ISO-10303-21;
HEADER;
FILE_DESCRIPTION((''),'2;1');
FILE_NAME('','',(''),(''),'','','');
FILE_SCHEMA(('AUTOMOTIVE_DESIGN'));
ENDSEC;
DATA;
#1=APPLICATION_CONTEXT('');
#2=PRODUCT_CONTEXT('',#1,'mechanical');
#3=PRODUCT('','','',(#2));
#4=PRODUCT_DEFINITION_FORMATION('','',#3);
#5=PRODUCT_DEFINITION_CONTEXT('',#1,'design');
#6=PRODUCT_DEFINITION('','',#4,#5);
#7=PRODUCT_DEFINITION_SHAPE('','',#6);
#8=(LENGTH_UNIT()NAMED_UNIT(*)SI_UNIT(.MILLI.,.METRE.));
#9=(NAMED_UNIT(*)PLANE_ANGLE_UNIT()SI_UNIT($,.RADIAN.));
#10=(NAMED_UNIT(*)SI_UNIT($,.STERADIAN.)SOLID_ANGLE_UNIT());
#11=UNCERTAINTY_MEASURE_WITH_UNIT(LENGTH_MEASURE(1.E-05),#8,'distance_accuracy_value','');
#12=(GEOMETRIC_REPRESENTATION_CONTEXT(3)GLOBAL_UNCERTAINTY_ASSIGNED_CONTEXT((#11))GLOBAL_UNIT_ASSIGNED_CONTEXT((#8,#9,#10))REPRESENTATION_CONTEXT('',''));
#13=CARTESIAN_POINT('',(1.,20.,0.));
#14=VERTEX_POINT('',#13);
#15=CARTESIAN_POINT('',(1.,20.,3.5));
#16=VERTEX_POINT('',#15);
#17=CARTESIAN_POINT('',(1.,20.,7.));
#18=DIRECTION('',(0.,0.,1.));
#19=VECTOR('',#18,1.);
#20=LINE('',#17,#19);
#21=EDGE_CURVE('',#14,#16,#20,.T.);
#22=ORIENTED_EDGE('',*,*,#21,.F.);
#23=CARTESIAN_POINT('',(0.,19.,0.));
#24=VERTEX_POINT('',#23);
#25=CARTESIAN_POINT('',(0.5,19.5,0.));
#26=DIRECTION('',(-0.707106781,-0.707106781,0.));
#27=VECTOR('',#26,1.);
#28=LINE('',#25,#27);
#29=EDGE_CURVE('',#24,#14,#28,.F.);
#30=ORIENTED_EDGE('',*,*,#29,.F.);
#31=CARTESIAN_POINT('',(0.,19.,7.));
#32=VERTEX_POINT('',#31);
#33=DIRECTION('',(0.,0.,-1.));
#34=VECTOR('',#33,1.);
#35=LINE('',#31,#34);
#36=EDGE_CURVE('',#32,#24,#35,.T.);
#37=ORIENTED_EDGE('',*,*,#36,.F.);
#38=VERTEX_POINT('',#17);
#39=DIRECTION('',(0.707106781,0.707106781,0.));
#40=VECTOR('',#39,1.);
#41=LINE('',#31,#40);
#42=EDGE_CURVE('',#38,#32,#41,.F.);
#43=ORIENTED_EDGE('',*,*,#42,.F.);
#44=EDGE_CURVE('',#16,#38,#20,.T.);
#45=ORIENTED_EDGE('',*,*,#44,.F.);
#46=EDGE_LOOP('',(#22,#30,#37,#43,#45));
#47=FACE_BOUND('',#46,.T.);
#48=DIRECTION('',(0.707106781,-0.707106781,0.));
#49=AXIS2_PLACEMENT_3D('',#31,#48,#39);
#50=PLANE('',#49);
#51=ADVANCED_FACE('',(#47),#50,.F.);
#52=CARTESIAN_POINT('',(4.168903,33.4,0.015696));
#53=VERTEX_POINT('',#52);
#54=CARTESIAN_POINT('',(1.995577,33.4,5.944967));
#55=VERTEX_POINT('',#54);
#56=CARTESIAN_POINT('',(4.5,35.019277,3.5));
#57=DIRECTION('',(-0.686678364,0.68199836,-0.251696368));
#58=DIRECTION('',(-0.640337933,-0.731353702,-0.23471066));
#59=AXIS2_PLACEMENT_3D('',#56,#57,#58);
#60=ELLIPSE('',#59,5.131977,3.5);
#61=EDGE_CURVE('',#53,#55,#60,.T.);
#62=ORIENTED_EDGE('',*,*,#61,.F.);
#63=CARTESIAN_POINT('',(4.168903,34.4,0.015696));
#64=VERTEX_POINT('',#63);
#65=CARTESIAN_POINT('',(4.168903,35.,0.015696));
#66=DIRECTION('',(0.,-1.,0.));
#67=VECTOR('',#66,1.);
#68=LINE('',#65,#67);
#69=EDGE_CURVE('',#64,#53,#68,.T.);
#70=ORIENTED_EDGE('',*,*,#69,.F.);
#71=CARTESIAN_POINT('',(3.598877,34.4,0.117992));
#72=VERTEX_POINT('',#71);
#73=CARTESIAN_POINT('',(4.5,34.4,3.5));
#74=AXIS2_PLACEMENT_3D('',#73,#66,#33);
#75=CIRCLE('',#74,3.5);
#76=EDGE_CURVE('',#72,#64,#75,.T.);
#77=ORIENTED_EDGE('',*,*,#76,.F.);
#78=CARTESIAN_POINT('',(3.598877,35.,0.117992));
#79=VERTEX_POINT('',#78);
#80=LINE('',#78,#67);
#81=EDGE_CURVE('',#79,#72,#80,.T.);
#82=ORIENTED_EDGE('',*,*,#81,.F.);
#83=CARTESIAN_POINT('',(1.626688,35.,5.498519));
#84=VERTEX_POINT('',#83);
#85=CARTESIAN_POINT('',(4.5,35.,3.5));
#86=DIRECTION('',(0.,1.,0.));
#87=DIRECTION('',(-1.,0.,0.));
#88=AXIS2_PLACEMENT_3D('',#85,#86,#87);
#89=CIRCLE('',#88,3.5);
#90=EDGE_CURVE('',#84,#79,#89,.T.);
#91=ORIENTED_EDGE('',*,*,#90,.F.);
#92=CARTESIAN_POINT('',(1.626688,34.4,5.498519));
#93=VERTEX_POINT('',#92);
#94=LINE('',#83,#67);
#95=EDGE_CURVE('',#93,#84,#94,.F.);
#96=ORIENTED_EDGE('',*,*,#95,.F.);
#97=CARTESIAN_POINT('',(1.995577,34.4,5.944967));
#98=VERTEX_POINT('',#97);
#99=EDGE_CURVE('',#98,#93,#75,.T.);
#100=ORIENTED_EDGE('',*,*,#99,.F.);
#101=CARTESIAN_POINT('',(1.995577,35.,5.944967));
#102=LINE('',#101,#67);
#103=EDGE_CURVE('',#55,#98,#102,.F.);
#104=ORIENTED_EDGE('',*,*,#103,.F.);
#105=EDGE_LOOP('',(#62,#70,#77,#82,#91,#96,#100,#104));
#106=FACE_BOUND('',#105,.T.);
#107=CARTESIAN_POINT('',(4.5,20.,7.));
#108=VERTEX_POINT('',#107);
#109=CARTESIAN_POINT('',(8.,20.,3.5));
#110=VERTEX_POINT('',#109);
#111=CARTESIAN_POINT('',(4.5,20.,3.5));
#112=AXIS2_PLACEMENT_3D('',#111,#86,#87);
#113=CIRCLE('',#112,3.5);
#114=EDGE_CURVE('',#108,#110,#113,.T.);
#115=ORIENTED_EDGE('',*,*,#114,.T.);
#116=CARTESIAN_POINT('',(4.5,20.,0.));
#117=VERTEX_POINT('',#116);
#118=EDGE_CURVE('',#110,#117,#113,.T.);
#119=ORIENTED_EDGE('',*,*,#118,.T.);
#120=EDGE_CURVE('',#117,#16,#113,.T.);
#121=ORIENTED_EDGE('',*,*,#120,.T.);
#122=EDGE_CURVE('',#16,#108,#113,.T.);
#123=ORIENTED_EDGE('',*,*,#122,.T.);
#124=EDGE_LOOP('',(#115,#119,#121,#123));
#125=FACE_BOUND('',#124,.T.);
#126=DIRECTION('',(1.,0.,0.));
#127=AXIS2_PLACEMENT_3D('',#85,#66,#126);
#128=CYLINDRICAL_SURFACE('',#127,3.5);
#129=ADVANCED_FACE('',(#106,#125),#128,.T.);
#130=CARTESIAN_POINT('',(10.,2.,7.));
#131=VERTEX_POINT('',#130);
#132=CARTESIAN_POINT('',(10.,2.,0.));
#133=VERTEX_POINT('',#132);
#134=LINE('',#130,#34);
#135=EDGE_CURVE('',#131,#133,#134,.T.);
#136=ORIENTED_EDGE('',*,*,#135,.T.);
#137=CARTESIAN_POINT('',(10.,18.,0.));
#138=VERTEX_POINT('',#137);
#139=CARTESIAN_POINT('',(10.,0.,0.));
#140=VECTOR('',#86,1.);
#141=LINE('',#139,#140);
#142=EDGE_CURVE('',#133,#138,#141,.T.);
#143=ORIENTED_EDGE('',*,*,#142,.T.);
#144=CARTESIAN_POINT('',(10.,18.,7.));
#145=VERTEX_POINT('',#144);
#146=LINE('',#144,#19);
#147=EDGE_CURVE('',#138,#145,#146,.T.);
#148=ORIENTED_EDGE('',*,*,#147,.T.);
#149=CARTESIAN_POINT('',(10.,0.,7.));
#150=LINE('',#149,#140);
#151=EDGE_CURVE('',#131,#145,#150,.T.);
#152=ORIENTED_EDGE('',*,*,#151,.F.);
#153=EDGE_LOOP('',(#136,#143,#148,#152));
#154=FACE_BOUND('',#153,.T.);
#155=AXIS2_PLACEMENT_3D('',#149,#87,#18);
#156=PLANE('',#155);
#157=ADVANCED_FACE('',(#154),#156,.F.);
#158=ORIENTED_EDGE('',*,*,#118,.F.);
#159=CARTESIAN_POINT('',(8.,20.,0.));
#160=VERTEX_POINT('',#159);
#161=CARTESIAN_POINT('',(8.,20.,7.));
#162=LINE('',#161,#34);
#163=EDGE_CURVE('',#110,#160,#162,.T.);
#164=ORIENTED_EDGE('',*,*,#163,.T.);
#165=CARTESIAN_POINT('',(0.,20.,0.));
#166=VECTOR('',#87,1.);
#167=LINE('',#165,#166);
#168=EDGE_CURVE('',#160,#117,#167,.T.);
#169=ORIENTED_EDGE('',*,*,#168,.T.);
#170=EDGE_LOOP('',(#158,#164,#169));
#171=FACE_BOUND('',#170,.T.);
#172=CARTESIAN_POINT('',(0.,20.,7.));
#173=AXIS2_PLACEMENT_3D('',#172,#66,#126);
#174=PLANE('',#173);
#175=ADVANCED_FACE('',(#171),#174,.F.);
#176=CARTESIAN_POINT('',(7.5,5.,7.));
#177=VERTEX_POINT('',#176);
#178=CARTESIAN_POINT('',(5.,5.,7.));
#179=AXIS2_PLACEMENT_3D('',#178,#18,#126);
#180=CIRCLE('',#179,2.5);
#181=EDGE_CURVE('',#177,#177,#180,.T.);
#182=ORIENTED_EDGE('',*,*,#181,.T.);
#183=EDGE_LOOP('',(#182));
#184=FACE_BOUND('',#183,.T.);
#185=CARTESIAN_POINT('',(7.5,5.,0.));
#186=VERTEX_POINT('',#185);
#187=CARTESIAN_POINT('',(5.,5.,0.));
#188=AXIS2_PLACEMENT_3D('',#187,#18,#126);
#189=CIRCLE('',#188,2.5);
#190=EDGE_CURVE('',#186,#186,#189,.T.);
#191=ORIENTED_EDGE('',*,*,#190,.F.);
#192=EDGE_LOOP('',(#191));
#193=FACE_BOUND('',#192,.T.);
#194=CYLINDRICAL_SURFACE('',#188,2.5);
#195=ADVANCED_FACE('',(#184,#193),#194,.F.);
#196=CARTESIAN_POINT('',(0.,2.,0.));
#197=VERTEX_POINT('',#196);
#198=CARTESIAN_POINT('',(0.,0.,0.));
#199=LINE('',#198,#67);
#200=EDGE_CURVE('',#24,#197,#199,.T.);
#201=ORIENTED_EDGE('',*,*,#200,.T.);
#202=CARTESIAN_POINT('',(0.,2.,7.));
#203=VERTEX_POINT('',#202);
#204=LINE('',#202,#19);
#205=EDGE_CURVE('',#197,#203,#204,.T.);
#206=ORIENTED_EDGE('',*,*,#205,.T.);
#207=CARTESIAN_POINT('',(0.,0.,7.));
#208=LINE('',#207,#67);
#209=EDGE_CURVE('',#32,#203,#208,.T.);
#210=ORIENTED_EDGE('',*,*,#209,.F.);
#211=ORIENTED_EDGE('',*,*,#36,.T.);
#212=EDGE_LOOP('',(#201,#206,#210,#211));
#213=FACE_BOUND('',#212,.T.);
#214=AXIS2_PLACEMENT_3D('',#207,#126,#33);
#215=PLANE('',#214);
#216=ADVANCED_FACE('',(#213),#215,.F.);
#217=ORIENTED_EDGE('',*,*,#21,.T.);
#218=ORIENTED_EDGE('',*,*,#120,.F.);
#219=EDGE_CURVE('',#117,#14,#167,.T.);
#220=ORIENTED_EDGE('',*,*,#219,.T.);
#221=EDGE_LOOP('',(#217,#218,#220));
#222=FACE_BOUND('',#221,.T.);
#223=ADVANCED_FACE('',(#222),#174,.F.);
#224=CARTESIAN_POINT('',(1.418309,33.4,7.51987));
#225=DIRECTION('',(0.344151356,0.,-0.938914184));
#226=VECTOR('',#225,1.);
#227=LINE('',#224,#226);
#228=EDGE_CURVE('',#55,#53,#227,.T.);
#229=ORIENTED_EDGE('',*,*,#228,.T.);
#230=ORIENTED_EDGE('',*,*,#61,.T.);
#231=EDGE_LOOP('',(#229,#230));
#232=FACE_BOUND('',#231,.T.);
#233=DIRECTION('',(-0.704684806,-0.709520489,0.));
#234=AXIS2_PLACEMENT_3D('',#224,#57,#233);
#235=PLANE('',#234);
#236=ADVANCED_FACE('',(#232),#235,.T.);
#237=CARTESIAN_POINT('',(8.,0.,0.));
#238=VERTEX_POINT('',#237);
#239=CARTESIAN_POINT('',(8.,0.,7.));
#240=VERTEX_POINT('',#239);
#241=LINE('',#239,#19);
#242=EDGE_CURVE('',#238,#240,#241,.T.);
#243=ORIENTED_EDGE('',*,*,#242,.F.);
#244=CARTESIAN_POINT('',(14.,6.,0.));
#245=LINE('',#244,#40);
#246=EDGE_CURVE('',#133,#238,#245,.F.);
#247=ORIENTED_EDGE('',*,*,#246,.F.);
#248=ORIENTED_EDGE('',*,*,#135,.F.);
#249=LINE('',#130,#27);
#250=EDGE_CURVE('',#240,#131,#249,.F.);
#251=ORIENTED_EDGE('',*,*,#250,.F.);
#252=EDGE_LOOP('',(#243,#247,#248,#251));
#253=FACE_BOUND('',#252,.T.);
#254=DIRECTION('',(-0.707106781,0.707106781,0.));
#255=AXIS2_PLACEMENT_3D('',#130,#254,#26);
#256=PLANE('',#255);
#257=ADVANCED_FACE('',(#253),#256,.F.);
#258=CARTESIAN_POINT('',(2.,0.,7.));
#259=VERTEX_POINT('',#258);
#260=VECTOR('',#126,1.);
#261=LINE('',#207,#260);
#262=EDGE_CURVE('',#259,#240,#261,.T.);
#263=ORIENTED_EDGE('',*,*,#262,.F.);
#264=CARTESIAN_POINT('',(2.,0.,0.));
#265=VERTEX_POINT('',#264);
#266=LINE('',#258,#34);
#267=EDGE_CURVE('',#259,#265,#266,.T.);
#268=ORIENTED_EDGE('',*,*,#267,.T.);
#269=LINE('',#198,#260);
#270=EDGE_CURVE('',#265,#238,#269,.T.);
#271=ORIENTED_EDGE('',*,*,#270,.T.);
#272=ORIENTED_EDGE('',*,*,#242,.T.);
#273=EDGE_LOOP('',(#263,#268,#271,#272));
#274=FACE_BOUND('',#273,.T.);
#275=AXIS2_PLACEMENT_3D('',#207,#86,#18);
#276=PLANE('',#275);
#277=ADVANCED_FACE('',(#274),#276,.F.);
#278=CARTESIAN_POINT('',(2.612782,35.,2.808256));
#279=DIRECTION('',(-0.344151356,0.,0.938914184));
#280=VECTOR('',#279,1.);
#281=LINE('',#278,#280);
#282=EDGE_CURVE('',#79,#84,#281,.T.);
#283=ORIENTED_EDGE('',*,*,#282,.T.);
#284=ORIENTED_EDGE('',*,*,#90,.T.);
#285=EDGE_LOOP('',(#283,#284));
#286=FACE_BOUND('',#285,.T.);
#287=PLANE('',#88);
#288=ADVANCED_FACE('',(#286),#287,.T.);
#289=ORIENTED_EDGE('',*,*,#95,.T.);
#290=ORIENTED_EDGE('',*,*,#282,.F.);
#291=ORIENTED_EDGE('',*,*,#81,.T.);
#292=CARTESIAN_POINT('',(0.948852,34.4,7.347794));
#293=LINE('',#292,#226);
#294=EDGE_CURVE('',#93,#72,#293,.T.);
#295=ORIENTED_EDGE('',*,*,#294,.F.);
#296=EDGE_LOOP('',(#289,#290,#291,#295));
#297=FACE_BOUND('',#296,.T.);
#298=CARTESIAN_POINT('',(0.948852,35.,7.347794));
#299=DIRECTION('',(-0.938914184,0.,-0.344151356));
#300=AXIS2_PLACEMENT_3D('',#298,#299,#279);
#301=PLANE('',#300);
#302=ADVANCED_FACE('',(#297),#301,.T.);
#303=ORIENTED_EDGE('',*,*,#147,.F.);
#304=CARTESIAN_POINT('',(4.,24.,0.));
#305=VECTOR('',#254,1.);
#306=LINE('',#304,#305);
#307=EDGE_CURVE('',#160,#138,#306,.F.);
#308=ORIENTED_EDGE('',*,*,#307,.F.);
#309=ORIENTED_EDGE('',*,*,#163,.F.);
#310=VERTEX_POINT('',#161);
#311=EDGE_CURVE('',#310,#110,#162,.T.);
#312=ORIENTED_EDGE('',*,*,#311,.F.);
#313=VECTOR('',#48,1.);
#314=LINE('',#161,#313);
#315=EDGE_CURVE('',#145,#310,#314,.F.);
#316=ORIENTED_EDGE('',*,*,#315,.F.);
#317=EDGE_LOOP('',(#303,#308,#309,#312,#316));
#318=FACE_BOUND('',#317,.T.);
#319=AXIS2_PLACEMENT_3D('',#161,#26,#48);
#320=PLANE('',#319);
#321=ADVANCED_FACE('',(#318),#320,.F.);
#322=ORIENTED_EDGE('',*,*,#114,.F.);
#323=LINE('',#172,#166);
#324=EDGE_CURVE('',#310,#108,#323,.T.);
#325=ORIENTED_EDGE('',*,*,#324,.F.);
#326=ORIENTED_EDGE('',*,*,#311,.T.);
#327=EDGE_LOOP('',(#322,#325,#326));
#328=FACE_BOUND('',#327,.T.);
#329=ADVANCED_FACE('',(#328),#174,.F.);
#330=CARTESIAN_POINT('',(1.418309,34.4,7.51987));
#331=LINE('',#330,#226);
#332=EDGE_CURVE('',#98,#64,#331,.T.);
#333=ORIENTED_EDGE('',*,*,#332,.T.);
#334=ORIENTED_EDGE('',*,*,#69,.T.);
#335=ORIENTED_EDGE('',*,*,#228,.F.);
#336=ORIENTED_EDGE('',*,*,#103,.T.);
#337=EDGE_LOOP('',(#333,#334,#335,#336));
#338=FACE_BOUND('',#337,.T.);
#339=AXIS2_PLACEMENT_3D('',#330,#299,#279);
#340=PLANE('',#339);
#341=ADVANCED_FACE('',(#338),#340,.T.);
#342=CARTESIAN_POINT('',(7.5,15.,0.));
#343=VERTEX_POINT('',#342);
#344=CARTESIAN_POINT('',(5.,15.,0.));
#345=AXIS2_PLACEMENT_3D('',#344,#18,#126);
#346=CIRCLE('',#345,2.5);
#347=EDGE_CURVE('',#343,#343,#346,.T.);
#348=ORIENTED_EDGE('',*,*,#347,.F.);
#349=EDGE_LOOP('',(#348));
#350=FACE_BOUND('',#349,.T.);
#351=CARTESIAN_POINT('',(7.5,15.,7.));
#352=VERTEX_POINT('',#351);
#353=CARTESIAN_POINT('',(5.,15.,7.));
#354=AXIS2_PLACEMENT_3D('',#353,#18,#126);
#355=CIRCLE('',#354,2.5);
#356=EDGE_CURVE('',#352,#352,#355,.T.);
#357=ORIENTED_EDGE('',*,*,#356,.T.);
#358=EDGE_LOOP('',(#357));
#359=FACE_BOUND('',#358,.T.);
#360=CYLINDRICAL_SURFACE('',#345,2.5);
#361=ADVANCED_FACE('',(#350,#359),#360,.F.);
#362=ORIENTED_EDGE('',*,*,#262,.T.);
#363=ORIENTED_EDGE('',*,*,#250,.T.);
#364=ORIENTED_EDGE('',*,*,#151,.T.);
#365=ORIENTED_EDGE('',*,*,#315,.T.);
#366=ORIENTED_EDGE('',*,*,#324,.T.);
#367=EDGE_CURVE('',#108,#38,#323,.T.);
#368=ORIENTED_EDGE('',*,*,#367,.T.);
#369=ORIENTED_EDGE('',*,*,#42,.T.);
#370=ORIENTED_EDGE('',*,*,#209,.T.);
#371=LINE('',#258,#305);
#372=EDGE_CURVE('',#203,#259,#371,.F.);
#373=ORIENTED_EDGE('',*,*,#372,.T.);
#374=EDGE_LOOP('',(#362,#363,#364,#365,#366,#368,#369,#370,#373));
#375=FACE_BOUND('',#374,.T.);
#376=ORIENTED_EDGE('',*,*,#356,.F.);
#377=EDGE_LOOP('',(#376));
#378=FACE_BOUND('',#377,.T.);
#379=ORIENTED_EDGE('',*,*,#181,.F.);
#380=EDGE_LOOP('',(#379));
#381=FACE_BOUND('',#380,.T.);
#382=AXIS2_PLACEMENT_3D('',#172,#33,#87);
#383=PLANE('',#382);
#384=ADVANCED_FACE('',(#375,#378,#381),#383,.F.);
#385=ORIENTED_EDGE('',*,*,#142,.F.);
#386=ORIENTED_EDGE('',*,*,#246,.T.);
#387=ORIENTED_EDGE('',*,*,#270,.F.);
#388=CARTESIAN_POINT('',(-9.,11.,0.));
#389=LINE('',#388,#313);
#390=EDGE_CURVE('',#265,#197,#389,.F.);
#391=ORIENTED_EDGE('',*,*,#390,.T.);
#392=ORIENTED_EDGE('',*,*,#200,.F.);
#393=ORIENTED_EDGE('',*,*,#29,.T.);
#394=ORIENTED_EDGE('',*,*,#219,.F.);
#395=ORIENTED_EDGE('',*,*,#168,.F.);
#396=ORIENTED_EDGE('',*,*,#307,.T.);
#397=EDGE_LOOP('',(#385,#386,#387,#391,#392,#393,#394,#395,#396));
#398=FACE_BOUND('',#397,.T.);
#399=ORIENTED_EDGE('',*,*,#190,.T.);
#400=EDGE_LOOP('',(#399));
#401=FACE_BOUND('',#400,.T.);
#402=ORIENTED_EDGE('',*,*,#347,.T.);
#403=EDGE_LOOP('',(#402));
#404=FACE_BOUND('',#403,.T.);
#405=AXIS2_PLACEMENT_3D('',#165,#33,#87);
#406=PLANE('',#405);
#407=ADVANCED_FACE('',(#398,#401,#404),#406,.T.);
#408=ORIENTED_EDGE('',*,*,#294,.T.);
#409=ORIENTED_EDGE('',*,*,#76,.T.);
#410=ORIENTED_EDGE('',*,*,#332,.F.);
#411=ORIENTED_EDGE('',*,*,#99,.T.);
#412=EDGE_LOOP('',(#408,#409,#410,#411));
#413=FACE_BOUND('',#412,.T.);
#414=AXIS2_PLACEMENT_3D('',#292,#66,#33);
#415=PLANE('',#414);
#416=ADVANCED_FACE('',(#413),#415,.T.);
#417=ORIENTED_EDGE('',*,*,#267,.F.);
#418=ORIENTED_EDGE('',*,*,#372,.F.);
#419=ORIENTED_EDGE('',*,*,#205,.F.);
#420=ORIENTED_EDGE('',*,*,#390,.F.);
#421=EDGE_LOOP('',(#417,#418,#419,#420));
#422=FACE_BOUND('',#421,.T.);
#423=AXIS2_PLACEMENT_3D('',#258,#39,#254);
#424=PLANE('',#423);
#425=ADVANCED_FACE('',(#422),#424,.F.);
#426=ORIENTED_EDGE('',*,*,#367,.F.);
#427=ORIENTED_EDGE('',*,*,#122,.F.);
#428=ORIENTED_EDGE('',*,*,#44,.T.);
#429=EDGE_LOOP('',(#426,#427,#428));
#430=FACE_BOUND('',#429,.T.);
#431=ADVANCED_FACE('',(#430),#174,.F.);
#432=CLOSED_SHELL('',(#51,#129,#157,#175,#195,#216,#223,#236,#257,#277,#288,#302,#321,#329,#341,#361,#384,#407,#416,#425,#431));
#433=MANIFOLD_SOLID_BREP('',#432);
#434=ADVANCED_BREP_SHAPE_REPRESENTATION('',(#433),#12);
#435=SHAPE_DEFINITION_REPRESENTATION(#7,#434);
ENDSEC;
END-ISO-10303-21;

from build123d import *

# Parameters (mm, degrees)
SKETCH1_W               = 10
SKETCH1_H               = 20
BOSS_EXTRUDE1_DEPTH     = 7
SKETCH2_R               = 3.5
BOSS_EXTRUDE2_DEPTH     = 15
SKETCH3_R               = 2.5
CUT_EXTRUDE1_DEPTH      = 38.067505986
CUT_EXTRUDE2_DEPTH      = 37.961317978
CUT_EXTRUDE2_DEPTH_BACK = 37.961317978
CHAMFER1_SIZE           = 2
CHAMFER2_SIZE           = 1


with BuildPart() as part:
    # Sketch1 → Boss-Extrude1 (new body)
    with BuildSketch(Plane.XY):
        with Locations((5, 10)):
            Rectangle(SKETCH1_W, SKETCH1_H)
    extrude(amount=BOSS_EXTRUDE1_DEPTH)

    # Sketch2 → Boss-Extrude2 (add)
    with BuildSketch(Plane(origin=(0, 20, 0), x_dir=(1, 0, 0), z_dir=(0, 1, 0))):
        with Locations(Location((4.5, -3.5, 0), (0, 0, 90))):
            Circle(SKETCH2_R)
    extrude(amount=BOSS_EXTRUDE2_DEPTH)

    # Sketch3 → Cut-Extrude1 (cut, through all)
    with BuildSketch(Plane.XY.offset(7)):
        with Locations((5, 15)):
            Circle(SKETCH3_R)
        with Locations((5, 5)):
            Circle(SKETCH3_R)
    extrude(amount=-CUT_EXTRUDE1_DEPTH, mode=Mode.SUBTRACT)

    # Sketch4 → Cut-Extrude2 (cut, two sides: drawn at the far end of the back side and taken through both)
    with BuildSketch(Plane(origin=(-0.597969362, 0, 1.631380802), x_dir=(0.9389141835786157, 0, 0.34415135605559033), z_dir=(-0.34415135605559033, 0, 0.9389141835786157)).offset(-CUT_EXTRUDE2_DEPTH_BACK)):
        Polygon((1.929643572, 35), (3.419643572, 35), (3.419643572, 34.4), (3.919643572, 34.4), (3.919643572, 33.4), (1.929643572, 31.265986267), align=None)
    extrude(amount=CUT_EXTRUDE2_DEPTH + CUT_EXTRUDE2_DEPTH_BACK, mode=Mode.SUBTRACT)

    # Chamfer1
    chamfer1_edges = [part.edges().sort_by_distance(p)[0] for p in [
        (10, 20, 3.5),
        (10, 0, 3.5),
        (0, 0, 3.5),
    ]]
    chamfer(chamfer1_edges, length=CHAMFER1_SIZE - 0.0001)  # a hair under: the kernel refuses the full size

    # Chamfer2
    chamfer2_edges = [part.edges().sort_by_distance(p)[0] for p in [
        (0, 20, 3.5),
    ]]
    chamfer(chamfer2_edges, length=CHAMFER2_SIZE - 0.0001)  # a hair under: the kernel refuses the full size


solid = part.part
